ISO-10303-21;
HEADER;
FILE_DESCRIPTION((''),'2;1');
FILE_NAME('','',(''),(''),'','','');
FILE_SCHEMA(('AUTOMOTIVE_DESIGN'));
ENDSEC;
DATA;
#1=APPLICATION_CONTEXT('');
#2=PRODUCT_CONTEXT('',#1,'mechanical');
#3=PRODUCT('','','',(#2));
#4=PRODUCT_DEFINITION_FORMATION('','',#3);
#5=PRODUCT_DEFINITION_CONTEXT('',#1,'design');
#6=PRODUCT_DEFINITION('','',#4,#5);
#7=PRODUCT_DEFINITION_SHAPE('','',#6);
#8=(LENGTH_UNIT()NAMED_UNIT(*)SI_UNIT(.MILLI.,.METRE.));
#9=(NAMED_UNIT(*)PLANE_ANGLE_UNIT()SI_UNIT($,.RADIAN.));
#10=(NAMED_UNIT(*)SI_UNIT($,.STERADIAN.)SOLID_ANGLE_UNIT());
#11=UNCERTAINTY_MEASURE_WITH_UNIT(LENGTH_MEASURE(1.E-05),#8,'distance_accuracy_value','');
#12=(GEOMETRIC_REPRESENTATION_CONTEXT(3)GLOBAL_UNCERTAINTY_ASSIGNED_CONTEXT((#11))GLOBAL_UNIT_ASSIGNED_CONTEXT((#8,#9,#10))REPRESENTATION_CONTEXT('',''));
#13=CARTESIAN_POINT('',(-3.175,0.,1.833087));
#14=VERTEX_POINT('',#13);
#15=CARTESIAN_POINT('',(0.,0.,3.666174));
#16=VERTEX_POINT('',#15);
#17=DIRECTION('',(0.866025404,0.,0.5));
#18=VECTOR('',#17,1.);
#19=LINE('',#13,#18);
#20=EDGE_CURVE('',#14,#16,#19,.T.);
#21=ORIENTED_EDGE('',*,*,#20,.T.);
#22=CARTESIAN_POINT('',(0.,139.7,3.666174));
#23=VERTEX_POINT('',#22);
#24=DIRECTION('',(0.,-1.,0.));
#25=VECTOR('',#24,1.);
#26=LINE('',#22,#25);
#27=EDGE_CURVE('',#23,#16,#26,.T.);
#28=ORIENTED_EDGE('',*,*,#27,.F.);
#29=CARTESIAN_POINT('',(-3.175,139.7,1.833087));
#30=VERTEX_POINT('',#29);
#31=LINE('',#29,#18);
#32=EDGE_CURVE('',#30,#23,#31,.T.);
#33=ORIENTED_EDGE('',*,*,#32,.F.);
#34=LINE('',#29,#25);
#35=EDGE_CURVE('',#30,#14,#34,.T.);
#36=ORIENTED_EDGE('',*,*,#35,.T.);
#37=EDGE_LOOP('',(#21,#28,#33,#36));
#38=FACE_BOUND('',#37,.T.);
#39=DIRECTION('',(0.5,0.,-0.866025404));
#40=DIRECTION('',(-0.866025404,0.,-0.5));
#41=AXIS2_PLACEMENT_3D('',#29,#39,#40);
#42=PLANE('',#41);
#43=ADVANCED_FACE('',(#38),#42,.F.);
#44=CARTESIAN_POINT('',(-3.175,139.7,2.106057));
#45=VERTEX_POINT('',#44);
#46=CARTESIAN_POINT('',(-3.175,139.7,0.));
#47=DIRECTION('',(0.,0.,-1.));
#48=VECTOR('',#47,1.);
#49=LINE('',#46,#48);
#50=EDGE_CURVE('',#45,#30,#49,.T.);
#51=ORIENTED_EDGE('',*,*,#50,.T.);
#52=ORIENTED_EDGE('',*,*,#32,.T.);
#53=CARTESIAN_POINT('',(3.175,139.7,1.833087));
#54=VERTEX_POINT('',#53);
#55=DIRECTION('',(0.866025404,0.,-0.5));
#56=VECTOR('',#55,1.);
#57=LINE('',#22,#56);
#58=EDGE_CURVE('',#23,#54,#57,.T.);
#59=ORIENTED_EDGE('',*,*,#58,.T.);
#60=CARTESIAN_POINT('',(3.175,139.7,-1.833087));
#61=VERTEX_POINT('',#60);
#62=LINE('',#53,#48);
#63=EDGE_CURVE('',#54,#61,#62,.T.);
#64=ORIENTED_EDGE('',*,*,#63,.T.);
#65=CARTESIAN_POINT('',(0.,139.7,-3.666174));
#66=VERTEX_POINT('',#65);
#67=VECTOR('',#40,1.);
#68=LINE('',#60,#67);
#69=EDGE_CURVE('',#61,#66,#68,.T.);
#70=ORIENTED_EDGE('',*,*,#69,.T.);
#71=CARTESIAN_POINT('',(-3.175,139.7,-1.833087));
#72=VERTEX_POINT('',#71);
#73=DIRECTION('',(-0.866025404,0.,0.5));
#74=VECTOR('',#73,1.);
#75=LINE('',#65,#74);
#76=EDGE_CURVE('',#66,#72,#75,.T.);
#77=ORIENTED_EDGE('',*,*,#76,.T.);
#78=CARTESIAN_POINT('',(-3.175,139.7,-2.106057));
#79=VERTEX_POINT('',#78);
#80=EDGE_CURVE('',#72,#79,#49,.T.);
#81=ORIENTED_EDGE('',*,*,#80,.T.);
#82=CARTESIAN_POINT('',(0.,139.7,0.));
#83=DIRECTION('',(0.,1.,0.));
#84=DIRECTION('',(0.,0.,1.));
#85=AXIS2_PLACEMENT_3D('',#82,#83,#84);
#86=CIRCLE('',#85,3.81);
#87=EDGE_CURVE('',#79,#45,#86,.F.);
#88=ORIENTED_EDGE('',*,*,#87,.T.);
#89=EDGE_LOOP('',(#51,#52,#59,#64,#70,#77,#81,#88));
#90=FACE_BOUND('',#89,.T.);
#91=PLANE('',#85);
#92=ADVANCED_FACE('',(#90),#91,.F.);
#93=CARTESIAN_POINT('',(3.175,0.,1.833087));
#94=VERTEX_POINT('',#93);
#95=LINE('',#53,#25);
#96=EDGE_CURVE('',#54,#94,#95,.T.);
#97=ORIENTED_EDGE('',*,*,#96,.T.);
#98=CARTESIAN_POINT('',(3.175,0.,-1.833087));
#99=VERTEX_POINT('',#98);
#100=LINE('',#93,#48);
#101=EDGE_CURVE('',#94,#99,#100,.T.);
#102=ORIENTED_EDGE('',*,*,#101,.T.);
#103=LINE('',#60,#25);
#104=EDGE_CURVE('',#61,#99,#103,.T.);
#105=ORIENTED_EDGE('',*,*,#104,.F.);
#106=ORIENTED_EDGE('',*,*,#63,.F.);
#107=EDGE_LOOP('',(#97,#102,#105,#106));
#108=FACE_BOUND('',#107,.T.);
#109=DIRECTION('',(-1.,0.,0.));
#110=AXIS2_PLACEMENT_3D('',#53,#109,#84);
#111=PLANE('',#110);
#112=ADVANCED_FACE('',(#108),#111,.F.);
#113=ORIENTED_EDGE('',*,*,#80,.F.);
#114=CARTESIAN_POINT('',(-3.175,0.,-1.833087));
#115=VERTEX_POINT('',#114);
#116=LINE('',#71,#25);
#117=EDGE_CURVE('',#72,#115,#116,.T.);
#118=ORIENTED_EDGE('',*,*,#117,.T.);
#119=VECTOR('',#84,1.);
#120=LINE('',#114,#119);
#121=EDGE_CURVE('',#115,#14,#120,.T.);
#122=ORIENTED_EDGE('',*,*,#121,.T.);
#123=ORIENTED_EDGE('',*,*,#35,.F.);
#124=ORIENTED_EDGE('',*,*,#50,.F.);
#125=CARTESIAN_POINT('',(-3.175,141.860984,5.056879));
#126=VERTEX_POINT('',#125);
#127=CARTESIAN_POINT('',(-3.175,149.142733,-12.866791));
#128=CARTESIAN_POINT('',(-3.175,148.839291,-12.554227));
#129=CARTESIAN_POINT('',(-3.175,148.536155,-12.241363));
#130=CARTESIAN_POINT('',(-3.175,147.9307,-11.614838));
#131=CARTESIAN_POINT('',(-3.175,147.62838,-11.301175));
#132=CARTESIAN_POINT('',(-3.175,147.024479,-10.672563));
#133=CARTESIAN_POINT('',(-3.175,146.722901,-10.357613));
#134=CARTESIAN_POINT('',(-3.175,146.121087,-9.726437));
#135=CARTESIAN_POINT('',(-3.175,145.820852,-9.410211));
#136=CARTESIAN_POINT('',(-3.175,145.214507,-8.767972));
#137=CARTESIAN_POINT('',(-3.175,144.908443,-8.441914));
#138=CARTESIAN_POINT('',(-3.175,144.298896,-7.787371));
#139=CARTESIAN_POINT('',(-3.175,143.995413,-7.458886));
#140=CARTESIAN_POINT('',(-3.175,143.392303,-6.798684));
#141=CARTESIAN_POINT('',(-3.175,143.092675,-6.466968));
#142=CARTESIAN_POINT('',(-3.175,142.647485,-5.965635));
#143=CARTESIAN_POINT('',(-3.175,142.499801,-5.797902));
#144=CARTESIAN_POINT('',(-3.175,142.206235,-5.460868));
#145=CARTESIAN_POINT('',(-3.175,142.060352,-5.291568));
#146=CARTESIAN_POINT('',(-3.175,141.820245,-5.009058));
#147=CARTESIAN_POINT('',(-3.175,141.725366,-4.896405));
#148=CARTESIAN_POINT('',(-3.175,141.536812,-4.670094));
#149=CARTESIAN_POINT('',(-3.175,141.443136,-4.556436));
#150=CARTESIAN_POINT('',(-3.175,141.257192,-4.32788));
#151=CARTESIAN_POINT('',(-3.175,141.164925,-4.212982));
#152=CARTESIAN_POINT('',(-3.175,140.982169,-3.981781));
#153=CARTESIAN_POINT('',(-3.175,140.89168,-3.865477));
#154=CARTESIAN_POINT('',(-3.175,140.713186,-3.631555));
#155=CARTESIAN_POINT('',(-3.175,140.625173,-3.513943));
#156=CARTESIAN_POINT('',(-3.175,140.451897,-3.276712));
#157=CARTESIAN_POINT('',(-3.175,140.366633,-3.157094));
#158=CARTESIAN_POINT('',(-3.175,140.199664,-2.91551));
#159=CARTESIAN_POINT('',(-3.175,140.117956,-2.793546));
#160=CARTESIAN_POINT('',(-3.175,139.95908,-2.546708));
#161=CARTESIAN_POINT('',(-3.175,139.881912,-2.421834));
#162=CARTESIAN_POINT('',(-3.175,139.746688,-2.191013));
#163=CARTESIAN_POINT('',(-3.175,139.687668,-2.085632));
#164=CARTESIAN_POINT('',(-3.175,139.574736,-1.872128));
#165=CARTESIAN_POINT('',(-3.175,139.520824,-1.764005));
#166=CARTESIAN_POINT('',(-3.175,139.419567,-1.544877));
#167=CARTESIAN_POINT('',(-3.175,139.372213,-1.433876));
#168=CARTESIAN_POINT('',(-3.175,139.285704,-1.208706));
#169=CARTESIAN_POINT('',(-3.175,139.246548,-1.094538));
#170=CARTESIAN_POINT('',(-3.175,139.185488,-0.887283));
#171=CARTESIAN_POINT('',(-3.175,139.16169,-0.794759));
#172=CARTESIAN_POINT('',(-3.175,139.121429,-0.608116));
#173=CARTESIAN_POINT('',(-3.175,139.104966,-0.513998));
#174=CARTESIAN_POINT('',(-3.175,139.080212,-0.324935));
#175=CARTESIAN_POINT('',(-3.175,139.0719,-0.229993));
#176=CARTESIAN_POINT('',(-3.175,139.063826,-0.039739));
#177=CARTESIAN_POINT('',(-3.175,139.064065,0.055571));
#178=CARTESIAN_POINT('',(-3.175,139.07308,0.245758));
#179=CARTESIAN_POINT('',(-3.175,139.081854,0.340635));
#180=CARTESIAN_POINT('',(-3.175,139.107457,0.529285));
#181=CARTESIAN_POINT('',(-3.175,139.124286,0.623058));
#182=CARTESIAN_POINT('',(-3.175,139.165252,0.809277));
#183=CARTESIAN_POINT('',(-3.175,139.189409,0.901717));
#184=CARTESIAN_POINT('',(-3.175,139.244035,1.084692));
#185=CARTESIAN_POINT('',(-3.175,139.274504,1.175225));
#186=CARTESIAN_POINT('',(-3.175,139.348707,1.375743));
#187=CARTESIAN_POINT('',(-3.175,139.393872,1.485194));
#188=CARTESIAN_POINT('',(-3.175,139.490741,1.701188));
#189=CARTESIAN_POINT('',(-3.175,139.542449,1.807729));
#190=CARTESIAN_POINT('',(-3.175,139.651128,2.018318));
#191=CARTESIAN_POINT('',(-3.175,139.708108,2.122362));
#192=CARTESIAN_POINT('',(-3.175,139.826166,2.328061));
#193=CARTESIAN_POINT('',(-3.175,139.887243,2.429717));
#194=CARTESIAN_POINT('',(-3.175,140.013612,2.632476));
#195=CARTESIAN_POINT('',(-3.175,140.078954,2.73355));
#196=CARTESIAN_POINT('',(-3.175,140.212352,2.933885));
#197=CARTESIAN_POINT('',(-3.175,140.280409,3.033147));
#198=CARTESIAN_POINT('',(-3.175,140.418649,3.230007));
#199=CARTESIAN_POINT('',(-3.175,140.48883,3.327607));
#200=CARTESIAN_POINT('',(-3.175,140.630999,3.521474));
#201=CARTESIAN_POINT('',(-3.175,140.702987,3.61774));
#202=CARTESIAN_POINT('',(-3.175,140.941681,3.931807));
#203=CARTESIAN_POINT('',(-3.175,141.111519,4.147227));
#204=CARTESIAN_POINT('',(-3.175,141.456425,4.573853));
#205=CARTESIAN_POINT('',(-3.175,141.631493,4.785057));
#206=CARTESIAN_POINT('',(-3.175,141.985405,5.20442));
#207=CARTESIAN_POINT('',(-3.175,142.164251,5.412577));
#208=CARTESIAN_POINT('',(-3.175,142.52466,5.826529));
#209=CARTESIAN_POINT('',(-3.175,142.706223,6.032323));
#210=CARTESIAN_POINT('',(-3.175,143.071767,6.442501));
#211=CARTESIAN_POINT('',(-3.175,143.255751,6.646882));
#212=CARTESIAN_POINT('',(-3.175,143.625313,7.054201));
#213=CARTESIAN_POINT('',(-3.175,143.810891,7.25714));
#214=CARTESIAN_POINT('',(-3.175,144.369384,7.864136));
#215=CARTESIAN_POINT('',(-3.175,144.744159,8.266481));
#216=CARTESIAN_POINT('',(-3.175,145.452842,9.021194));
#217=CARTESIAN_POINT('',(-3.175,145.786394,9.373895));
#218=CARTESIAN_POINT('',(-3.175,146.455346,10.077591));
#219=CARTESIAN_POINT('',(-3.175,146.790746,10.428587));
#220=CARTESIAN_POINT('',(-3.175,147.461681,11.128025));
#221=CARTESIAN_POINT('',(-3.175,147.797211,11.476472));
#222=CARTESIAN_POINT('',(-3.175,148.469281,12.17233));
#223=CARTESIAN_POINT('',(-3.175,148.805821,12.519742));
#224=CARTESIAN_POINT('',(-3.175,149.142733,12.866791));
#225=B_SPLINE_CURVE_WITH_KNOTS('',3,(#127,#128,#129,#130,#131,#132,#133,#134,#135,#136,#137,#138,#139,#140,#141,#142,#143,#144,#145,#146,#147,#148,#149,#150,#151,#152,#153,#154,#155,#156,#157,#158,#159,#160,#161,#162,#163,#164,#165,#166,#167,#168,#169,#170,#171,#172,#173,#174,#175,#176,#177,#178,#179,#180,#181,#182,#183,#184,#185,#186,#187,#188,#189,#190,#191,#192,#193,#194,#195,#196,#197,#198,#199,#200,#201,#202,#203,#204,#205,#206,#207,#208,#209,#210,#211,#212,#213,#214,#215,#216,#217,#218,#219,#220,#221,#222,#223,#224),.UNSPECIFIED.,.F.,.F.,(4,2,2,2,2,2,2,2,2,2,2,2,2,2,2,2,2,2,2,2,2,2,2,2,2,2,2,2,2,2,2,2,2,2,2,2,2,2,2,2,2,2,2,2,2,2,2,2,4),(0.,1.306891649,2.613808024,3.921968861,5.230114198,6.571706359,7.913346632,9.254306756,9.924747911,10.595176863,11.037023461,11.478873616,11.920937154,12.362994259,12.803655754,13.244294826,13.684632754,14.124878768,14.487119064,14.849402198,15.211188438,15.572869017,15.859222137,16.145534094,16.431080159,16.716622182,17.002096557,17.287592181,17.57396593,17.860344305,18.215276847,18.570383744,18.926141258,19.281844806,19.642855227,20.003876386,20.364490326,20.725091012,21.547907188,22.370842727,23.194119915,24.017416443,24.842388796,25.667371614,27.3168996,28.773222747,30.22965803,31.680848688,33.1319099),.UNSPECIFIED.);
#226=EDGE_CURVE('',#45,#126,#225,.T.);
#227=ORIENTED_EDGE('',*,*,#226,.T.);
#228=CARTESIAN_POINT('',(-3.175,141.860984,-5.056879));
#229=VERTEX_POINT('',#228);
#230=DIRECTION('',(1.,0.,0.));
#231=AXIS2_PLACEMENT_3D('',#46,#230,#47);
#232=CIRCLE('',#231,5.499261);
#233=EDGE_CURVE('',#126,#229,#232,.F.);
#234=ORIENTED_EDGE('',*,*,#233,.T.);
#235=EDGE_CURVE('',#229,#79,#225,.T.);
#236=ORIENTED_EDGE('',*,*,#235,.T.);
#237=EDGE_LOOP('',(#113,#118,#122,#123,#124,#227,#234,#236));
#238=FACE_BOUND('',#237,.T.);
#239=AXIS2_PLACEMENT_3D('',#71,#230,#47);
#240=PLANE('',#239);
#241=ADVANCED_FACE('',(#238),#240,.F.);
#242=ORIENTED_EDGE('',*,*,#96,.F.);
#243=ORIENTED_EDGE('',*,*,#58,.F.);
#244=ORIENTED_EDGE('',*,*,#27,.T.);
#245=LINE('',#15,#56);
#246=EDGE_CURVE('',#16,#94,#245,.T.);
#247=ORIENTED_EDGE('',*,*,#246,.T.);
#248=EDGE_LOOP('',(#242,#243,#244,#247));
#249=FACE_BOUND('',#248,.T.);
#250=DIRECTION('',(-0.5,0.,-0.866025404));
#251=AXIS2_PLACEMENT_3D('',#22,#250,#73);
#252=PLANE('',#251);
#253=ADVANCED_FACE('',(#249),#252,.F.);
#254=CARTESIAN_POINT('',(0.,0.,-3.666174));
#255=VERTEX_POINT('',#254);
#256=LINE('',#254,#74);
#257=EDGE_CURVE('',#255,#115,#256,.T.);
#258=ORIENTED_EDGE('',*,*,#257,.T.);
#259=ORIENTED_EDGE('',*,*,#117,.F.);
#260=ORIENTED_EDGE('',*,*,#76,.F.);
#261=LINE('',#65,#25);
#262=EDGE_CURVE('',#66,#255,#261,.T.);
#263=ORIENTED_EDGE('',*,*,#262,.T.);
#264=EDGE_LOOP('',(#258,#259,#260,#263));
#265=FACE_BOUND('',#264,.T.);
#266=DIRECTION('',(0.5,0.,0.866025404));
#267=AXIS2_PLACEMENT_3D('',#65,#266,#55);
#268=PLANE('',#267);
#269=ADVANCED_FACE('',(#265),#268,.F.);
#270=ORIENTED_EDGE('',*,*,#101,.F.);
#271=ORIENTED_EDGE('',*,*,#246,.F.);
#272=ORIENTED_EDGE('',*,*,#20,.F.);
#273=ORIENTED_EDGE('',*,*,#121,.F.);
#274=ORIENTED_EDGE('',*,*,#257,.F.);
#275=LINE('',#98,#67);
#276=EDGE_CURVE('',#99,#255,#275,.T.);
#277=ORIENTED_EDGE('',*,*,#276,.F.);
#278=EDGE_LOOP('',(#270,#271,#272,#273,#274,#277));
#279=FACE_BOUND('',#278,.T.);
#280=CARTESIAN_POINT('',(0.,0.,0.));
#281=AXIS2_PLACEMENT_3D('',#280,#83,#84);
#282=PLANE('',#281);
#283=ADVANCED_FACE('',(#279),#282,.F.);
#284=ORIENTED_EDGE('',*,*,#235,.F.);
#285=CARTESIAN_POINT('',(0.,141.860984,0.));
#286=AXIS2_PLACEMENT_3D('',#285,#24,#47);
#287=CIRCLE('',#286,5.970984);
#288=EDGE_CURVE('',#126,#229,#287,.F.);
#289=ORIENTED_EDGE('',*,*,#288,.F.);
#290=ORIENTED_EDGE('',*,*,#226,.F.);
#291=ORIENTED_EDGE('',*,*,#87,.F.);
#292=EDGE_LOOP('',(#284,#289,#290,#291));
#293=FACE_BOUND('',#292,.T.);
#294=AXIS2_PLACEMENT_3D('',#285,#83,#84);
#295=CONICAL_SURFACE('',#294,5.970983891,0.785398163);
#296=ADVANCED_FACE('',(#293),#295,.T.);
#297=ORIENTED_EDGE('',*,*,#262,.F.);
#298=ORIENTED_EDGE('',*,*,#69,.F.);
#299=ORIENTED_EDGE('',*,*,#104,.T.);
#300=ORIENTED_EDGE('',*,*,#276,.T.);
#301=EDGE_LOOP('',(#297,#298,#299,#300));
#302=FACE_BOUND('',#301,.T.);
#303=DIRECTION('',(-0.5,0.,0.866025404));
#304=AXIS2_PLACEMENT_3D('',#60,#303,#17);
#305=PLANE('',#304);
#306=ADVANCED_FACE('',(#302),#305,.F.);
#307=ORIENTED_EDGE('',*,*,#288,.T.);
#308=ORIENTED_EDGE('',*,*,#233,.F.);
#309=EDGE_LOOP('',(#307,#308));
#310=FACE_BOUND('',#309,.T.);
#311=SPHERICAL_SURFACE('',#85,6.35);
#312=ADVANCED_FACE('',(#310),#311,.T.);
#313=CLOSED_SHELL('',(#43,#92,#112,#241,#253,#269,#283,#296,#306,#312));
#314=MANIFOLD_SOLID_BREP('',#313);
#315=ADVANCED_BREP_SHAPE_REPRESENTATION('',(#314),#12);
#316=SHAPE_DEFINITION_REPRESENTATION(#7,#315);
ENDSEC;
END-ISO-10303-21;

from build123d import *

# Parameters (mm, degrees)
BOSS_EXTRUDE1_DEPTH = 139.7
SKETCH3_R           = 6.35
BOSS_EXTRUDE2_DEPTH = 6.35
FILLET1_R           = 6.35
CHAMFER1_SIZE       = 2.54
SKETCH4_W           = 9.672441956
SKETCH4_H           = 22.08614384
CUT_EXTRUDE1_DEPTH  = 152.4


# Some blends are built 0.0001 mm under size
with BuildPart() as part:
    # Sketch1 → Boss-Extrude1 (new body)
    with BuildSketch(Plane(origin=(0, 0, 0), x_dir=(1, 0, 0), z_dir=(0, 1, 0))):
        Polygon((0, 3.666174209), (-3.175, 1.833087105), (-3.175, -1.833087105), (0, -3.666174209), (3.175, -1.833087105), (3.175, 1.833087105), align=None)
    extrude(amount=BOSS_EXTRUDE1_DEPTH)

    # Sketch3 → Boss-Extrude2 (add)
    with BuildSketch(Plane(origin=(0, 139.7, 0), x_dir=(1, 0, 0), z_dir=(0, 1, 0))):
        with Locations(Location((0, 0, 0), (0, 0, 270))):
            Circle(SKETCH3_R)
    extrude(amount=BOSS_EXTRUDE2_DEPTH)

    # Fillet1
    fillet1_edges = [part.edges().sort_by_distance(p)[0] for p in [
        (0, 146.05, -6.35),
    ]]
    fillet(fillet1_edges, radius=FILLET1_R - 0.0001)  # a hair under: the kernel refuses the full size

    # Chamfer1
    # the kernel refuses this chamfer: 2.54 mm, written as the material it takes off along each edge
    with BuildSketch(Plane(origin=(0, 139.7, 0), x_dir=(0, 0, 1), z_dir=(-1, 0, 0))) as chamfer1_piece_1:
        Polygon((6.35, CHAMFER1_SIZE), (6.35 - CHAMFER1_SIZE, 0), (6.35, 0), align=None)
    revolve(axis=Axis((0, 139.7, 0), (0, 1, 0)), mode=Mode.SUBTRACT)

    # Sketch4 → Cut-Extrude1 (cut)
    with BuildSketch(Plane.XZ):
        with Locations((-8.011220978, 1.321657353)):
            Rectangle(SKETCH4_W, SKETCH4_H)
    extrude(amount=-CUT_EXTRUDE1_DEPTH, mode=Mode.SUBTRACT)


solid = part.part
